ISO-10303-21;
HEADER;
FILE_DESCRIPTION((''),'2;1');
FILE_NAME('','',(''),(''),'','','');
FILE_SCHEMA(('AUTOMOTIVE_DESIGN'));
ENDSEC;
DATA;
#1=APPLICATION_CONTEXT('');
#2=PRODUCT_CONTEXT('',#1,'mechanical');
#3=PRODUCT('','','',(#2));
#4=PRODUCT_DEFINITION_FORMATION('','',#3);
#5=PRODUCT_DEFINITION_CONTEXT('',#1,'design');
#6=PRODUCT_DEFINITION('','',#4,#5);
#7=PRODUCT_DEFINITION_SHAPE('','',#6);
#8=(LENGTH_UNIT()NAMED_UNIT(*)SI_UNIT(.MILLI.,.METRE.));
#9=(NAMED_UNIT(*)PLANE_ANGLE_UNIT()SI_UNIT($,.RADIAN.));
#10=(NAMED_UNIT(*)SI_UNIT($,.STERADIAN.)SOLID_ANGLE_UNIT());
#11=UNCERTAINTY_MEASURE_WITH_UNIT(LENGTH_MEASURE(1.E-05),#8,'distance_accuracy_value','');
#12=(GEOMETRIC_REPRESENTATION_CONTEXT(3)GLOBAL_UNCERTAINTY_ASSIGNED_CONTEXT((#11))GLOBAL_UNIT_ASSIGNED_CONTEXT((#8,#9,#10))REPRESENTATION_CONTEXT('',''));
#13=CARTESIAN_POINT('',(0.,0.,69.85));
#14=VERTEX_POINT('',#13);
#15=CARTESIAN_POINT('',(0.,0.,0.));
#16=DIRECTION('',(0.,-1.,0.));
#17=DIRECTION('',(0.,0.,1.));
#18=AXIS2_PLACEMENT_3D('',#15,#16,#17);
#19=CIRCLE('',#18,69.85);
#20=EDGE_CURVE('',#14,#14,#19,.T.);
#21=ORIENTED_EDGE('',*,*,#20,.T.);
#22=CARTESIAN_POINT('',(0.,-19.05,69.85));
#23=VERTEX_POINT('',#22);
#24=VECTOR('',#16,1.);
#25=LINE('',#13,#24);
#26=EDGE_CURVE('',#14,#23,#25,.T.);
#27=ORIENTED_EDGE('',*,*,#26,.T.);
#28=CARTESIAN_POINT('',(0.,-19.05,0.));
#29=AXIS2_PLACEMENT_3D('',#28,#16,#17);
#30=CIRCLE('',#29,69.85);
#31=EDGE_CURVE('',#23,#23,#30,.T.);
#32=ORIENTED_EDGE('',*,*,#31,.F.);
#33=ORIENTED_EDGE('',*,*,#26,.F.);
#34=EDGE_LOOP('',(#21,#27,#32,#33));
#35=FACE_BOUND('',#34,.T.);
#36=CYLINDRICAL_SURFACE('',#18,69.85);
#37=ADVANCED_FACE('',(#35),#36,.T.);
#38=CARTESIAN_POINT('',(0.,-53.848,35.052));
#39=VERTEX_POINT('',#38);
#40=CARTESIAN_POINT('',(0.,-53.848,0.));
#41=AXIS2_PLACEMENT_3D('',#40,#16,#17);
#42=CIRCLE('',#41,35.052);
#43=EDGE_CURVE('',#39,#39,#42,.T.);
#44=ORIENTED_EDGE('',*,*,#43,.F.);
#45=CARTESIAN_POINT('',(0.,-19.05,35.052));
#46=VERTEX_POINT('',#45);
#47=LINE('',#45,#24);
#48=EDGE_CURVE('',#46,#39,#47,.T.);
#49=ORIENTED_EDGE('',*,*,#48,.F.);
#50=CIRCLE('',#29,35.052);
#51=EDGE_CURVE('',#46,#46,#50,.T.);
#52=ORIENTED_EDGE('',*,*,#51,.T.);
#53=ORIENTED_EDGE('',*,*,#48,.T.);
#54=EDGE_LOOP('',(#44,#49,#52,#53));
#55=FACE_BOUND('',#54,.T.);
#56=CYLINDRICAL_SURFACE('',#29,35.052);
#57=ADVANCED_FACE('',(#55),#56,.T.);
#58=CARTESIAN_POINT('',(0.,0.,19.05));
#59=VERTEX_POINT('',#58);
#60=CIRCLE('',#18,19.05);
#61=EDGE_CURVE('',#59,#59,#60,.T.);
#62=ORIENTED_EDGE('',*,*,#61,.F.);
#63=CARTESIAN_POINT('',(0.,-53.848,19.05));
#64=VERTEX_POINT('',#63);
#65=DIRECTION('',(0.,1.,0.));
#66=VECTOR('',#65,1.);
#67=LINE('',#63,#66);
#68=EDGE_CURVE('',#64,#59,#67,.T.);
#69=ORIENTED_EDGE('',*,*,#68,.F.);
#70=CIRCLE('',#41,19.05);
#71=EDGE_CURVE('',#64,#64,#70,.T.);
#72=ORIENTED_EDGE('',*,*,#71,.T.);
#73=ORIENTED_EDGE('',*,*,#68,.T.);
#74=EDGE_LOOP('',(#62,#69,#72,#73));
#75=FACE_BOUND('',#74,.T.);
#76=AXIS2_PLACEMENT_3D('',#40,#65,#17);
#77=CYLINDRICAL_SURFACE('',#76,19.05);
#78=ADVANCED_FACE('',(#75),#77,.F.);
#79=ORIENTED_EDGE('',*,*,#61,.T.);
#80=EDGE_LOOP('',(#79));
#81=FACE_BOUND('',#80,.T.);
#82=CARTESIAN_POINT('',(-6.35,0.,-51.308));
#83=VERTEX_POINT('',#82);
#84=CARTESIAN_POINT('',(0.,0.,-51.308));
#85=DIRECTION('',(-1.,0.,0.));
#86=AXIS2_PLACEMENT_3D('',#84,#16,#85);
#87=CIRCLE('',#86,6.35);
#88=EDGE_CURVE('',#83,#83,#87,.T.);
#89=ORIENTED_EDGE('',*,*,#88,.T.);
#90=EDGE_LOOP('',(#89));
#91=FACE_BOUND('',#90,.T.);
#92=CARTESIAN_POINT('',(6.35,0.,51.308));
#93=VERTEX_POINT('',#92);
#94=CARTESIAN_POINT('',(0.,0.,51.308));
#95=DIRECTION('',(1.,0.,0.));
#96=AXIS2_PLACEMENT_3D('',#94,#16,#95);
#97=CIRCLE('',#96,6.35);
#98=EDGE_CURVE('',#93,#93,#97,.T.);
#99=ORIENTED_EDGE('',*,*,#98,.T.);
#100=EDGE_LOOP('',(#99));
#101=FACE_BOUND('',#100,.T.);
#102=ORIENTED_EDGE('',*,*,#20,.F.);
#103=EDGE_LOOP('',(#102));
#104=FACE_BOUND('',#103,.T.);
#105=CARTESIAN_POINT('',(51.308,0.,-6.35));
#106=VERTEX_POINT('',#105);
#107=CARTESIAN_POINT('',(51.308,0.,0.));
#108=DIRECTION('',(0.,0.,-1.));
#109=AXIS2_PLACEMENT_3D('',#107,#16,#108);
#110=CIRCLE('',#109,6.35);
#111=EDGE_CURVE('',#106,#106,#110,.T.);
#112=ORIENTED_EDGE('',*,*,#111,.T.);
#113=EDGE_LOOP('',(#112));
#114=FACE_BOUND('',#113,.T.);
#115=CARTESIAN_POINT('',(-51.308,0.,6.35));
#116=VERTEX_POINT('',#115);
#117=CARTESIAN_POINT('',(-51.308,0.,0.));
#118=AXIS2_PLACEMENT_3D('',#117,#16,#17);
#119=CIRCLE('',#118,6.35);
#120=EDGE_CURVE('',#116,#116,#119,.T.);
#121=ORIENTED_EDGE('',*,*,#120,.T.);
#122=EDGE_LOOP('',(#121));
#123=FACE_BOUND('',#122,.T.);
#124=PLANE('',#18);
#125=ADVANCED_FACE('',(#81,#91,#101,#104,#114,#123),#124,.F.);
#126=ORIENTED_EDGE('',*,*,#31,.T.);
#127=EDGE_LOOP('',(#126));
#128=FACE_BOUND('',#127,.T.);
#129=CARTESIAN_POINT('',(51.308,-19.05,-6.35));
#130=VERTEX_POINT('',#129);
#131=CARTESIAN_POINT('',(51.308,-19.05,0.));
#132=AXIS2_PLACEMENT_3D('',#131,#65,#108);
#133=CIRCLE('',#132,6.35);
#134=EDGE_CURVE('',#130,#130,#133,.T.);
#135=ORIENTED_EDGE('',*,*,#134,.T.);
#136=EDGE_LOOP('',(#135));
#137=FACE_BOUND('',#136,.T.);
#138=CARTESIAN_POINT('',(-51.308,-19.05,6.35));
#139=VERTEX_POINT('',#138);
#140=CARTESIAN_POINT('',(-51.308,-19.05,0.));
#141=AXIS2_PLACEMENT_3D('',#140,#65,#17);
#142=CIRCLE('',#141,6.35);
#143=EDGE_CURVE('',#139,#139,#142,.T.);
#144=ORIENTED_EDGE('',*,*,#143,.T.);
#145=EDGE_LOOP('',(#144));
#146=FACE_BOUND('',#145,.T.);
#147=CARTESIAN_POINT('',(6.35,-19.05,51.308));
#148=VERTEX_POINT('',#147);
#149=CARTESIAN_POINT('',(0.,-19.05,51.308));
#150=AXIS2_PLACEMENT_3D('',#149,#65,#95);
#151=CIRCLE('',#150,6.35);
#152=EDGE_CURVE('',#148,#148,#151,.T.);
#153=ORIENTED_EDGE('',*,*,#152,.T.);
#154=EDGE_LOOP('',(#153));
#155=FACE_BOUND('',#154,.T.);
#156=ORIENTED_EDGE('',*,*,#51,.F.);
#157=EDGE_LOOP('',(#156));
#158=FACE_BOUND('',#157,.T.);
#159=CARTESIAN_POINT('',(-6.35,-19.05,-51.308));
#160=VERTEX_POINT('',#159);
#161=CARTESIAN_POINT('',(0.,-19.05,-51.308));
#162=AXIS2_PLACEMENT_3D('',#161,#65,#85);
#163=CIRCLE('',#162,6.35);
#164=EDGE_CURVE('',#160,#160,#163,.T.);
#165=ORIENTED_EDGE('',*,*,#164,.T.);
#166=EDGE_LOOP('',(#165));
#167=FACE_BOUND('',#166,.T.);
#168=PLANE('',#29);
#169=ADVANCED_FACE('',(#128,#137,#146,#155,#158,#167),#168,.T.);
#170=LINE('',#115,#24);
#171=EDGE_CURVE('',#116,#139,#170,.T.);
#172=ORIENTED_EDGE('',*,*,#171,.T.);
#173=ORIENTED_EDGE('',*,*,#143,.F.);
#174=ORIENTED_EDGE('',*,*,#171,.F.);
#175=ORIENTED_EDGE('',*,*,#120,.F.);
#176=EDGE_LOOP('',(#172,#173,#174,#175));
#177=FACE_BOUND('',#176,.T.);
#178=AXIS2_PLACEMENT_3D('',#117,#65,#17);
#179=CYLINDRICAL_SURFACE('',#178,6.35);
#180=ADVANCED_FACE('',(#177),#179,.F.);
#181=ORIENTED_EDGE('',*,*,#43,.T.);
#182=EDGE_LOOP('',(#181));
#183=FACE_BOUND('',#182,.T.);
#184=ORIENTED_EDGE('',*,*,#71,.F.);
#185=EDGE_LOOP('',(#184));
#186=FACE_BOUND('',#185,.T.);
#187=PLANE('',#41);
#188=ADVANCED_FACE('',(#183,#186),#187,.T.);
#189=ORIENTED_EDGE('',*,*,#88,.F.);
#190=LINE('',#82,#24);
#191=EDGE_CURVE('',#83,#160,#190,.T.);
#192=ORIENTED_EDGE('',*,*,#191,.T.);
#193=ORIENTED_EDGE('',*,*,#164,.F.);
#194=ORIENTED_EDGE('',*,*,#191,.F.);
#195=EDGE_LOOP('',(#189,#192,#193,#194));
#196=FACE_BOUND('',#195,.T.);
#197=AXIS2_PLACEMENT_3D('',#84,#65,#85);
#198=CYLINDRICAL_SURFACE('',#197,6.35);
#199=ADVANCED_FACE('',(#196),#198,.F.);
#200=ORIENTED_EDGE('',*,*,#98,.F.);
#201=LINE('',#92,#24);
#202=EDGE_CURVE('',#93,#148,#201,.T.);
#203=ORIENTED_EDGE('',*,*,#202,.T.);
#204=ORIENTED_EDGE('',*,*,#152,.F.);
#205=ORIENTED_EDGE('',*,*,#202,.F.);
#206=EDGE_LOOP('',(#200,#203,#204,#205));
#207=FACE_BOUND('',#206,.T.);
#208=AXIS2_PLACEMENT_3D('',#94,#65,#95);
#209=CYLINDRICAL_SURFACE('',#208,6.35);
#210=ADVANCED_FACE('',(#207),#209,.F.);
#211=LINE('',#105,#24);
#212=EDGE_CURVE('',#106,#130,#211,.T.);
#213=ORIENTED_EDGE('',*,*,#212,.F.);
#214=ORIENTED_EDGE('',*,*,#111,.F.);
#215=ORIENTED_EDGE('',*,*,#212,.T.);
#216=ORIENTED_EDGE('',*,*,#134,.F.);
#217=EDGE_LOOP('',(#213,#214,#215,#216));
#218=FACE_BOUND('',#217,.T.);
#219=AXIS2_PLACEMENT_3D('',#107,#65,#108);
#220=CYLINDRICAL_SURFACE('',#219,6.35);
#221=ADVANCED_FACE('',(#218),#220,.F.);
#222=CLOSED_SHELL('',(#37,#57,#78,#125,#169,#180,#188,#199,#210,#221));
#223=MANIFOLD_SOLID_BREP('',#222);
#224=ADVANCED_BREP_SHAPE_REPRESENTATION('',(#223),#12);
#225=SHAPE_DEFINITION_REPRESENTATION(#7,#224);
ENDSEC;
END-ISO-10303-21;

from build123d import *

# Parameters (mm, degrees)
F2_R            = 6.35
F3_DEPTH        = 53.849
F3_COPIES_COUNT = 4


# Not quite as in the source:
# - a pattern or mirror of a feature is missing from the dataset's text; its kind, count and spacing are read off the source's solid


with BuildPart() as f1:
    # F0 (on Right) → F1 (revolve)
    with BuildSketch(Plane.YZ):
        Polygon((0, 19.05), (0, 69.85), (-19.05, 69.85), (-19.05, 35.052), (-53.848, 35.052), (-53.848, 19.05), align=None)
    revolve(axis=Axis((0, -53.4342415631, 0), (0, -1, 0)))

    # F2 (on Front) → F3 (cut, through all)
    with BuildSketch(Plane.XZ):
        with Locations((0, 51.308)):
            Circle(F2_R)
    f3 = extrude(amount=F3_DEPTH, mode=Mode.SUBTRACT)

    # F3_copies: F3 ×4 about axis
    f3_copies_axis = Axis((0, 0, 0), (0, 1, 0))
    for i in range(1, F3_COPIES_COUNT):
        add(f3.rotate(f3_copies_axis, i * 360 / F3_COPIES_COUNT), mode=Mode.SUBTRACT)


solid = f1.part
